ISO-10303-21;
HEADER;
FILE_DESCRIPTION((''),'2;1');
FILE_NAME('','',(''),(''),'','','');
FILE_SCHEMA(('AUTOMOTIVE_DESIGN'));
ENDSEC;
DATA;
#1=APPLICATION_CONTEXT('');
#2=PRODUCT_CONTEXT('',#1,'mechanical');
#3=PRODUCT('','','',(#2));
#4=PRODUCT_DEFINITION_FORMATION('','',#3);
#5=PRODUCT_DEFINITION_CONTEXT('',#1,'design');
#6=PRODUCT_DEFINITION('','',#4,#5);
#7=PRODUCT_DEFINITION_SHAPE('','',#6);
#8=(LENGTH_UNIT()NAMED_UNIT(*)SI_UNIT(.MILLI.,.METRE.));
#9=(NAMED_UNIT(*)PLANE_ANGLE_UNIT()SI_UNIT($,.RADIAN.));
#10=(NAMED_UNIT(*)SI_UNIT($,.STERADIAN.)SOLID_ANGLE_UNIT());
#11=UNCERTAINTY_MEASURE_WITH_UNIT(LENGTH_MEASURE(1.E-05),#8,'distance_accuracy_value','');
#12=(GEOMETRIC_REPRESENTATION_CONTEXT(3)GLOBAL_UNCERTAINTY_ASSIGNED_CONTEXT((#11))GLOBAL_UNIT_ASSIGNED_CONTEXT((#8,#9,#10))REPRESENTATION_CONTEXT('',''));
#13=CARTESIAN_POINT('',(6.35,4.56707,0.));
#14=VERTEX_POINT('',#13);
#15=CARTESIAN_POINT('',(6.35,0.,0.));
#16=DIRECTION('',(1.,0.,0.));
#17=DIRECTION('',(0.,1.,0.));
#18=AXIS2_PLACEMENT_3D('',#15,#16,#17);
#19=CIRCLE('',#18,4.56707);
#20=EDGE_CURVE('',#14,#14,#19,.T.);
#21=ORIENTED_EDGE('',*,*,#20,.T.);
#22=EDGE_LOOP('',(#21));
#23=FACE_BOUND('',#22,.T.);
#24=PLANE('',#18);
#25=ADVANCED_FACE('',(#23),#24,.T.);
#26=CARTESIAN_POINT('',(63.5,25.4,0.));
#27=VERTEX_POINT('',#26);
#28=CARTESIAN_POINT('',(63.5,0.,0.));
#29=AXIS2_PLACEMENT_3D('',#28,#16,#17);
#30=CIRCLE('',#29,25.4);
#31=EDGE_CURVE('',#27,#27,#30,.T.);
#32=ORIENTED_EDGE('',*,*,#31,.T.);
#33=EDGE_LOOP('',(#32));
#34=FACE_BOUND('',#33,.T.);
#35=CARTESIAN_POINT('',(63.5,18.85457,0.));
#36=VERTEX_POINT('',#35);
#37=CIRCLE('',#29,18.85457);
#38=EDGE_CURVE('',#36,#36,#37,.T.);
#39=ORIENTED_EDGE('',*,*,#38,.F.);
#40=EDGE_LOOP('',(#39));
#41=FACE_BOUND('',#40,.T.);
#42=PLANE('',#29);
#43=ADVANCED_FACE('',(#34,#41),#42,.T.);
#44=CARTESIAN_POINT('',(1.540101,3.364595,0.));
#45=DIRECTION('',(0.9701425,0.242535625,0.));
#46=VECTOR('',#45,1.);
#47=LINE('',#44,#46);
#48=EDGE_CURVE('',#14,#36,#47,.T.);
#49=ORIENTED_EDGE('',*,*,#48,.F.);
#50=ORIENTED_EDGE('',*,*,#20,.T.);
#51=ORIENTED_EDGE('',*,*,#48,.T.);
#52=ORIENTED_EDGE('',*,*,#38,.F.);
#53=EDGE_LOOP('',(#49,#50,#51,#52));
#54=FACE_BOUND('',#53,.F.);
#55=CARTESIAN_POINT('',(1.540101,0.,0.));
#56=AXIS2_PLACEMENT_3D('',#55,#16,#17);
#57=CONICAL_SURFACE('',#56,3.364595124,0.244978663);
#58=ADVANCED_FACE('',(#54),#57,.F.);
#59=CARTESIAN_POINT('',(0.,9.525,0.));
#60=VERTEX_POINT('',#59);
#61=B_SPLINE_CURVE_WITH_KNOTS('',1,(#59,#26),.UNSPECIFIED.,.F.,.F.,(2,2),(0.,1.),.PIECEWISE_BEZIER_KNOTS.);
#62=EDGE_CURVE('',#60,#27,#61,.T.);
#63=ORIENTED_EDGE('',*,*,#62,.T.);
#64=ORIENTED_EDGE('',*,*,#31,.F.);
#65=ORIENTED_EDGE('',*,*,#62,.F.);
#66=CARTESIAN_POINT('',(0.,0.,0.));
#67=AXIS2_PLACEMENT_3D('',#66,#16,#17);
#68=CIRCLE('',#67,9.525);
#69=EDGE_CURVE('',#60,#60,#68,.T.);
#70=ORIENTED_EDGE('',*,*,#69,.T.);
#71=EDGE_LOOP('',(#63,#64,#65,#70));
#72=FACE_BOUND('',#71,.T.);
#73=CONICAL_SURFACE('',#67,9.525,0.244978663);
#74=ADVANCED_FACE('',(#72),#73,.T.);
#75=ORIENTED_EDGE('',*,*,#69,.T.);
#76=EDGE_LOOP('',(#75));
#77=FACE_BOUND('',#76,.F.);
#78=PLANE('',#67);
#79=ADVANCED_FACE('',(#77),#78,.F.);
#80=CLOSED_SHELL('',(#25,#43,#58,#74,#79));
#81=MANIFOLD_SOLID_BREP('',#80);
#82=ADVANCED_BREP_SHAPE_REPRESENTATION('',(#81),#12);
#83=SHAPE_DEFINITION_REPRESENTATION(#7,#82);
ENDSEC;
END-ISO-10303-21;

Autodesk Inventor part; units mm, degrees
ref_plane "YZ Plane" through (0, 0, 0) normal (1, 0, 0) x (0, 1, 0)
ref_plane "XZ Plane" through (0, 0, 0) normal (0, 1, 0) x (-1, 0, 0)
ref_plane "XY Plane" through (0, 0, 0) normal (0, 0, 1) x (1, 0, 0)
sketch "Sketch1" plane through (0, 0, 0) normal (1, 0, 0) x (0, 1, 0)
  circle A0 centre (0, 0) radius 9.525
  dimension "d0" = 19.05
sketch "3D Sketch3"
  dimension "d10" = 63.5
  dimension "d11" = 0
ref_plane "Work Plane3" through (63.5, 0, 0) normal (1, 0, 0) x (0, 1, 0)
sketch "Sketch3" plane through (63.5, 0, 0) normal (1, 0, 0) x (0, 1, 0)
  circle A0 centre (0, 0) radius 25.4
  dimension "d12" = 50.8
loft "Loft2" add profiles "Sketch1", "Sketch3"
shell "Shell2" thickness 6.35 removed faces 1 at (63.5, -7.2508, -1.9085)
